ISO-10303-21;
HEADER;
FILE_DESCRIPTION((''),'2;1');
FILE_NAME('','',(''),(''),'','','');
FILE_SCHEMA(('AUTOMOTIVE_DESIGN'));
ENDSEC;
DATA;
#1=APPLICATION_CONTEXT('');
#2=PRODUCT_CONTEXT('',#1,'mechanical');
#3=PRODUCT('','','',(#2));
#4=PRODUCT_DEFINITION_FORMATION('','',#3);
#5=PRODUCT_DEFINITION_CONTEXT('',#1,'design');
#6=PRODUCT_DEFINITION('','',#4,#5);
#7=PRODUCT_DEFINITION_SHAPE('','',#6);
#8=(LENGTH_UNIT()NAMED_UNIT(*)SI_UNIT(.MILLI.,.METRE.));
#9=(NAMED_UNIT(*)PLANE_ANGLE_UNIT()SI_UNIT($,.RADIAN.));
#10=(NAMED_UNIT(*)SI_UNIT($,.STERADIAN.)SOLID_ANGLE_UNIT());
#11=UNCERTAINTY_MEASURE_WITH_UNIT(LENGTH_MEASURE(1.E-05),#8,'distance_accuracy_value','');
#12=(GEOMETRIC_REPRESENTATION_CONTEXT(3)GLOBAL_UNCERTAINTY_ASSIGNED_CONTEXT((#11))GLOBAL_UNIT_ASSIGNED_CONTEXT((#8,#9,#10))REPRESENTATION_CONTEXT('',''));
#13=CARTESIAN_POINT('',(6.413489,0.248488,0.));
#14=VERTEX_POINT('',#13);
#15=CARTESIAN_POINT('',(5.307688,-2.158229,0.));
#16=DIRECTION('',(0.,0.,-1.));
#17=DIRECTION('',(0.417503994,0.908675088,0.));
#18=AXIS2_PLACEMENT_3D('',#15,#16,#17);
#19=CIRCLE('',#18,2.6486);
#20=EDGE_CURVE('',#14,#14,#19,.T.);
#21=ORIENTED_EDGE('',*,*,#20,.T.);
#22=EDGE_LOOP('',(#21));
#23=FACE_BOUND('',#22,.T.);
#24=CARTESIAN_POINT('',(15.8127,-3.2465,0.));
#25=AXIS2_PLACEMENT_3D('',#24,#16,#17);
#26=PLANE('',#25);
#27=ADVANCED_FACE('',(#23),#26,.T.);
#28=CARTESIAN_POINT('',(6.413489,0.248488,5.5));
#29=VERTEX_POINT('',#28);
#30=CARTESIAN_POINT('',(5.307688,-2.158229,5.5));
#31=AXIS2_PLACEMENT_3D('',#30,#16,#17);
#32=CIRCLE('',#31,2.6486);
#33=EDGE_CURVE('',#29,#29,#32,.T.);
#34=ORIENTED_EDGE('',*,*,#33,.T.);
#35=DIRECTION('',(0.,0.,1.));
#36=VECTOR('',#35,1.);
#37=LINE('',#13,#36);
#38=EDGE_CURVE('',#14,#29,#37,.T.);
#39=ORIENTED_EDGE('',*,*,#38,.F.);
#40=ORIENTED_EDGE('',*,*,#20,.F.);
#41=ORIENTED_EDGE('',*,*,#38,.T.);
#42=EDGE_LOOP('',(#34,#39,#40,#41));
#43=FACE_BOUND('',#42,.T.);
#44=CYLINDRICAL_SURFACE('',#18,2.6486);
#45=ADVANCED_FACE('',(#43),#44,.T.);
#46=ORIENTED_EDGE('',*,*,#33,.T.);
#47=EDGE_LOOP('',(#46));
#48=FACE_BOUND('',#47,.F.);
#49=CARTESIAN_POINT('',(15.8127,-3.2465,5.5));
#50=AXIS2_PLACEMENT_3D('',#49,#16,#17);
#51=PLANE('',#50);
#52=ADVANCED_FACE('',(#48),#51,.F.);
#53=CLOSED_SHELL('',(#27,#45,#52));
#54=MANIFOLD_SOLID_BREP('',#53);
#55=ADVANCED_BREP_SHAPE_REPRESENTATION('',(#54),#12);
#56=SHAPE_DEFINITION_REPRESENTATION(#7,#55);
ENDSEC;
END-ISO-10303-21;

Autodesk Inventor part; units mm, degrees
ref_plane "YZ Plane" through (0, 0, 0) normal (1, 0, 0) x (0, 1, 0)
ref_plane "XZ Plane" through (0, 0, 0) normal (0, 1, 0) x (-1, 0, 0)
ref_plane "XY Plane" through (0, 0, 0) normal (0, 0, 1) x (1, 0, 0)
ref_plane "Work Plane1" through (15.8127, -3.2465, 0) normal (0, 0, -1) x (0.417504, 0.9086751, 0)
sketch "Sketch1" plane through (15.8127, -3.2465, 0) normal (0, 0, -1) x (0.417504, 0.9086751, 0)
  line L0 (-7.897, -2) -> (1.603, -2) projected
  line L1 (1.603, -2) -> (1.603, -5.5) projected
  line L2 (1.603, -5.5) -> (-7.897, -5.5) projected
  line L3 (-7.897, -5.5) -> (-7.897, -2) projected
  line L4 (1.603, -19) -> (-7.897, -19) projected
  line L5 (-7.897, -19) -> (-7.897, -15.5) projected
  line L6 (-7.897, -15.5) -> (1.603, -15.5) projected
  line L7 (1.603, -15.5) -> (1.603, -19) projected
  arc A0 (9.303, -26.8555) -> (8.303, -25.8555) centre (8.303, -26.8555) ccw projected
  line L8 (9.303, -26.8555) -> (9.303, -30) projected
  line L9 (9.303, -30) -> (-16.397, -30) projected
  line L10 (-16.397, -30) -> (-16.397, -20.4723) projected
  arc A1 (-15.397, -19.4723) -> (-16.397, -20.4723) centre (-15.397, -20.4723) ccw projected
  line L11 (-15.397, -19.4723) -> (-13.5347, -19.4723) projected
  arc A2 (-13.5347, -19.4723) -> (-12.5347, -18.4723) centre (-13.5347, -18.4723) ccw projected
  line L12 (-12.5347, -18.4723) -> (-12.5347, 0) projected
  line L13 (-12.5347, 0) -> (-1, 0) projected
  arc A3 (-1, 0) -> (0, 1) centre (-1, 1) ccw projected
  line L14 (0, 1) -> (0, 2) projected
  arc A4 (1, 3) -> (0, 2) centre (1, 2) ccw projected
  line L15 (1, 3) -> (3.5653, 3) projected
  arc A5 (4.5653, 2) -> (3.5653, 3) centre (3.5653, 2) ccw projected
  line L16 (4.5653, 2) -> (4.5653, -24.8555) projected
  arc A6 (4.5653, -24.8555) -> (5.5653, -25.8555) centre (5.5653, -24.8555) ccw projected
  line L17 (5.5653, -25.8555) -> (8.303, -25.8555) projected
  line L18 (2.603, -17.5) -> (2.603, -2) projected
  line L19 (2.603, -2) -> (-10.897, -2) projected
  line L20 (-10.897, -2) -> (-10.897, -17.5) projected
  line L21 (-10.897, -17.5) -> (2.603, -17.5) projected
  circle A7 centre (6.603, -27.5) radius 1 projected
  circle A8 centre (-13.897, -21) radius 1 projected
  circle A9 centre (1.603, 0.5) radius 1 projected
  circle A10 centre (-3.397, -10) radius 2.6486
  point P0 (-3.6519, -15.7241)
  dimension "d0" = 10.5
  dimension "d1" = 11
  dimension "d2" = 10.5
  dimension "d3" = 5
extrude "Extrusion1" add sketch "Sketch1" against normal up to surface (5.5 mm away) contours A10
properties part number "00_KES400_Lens"
